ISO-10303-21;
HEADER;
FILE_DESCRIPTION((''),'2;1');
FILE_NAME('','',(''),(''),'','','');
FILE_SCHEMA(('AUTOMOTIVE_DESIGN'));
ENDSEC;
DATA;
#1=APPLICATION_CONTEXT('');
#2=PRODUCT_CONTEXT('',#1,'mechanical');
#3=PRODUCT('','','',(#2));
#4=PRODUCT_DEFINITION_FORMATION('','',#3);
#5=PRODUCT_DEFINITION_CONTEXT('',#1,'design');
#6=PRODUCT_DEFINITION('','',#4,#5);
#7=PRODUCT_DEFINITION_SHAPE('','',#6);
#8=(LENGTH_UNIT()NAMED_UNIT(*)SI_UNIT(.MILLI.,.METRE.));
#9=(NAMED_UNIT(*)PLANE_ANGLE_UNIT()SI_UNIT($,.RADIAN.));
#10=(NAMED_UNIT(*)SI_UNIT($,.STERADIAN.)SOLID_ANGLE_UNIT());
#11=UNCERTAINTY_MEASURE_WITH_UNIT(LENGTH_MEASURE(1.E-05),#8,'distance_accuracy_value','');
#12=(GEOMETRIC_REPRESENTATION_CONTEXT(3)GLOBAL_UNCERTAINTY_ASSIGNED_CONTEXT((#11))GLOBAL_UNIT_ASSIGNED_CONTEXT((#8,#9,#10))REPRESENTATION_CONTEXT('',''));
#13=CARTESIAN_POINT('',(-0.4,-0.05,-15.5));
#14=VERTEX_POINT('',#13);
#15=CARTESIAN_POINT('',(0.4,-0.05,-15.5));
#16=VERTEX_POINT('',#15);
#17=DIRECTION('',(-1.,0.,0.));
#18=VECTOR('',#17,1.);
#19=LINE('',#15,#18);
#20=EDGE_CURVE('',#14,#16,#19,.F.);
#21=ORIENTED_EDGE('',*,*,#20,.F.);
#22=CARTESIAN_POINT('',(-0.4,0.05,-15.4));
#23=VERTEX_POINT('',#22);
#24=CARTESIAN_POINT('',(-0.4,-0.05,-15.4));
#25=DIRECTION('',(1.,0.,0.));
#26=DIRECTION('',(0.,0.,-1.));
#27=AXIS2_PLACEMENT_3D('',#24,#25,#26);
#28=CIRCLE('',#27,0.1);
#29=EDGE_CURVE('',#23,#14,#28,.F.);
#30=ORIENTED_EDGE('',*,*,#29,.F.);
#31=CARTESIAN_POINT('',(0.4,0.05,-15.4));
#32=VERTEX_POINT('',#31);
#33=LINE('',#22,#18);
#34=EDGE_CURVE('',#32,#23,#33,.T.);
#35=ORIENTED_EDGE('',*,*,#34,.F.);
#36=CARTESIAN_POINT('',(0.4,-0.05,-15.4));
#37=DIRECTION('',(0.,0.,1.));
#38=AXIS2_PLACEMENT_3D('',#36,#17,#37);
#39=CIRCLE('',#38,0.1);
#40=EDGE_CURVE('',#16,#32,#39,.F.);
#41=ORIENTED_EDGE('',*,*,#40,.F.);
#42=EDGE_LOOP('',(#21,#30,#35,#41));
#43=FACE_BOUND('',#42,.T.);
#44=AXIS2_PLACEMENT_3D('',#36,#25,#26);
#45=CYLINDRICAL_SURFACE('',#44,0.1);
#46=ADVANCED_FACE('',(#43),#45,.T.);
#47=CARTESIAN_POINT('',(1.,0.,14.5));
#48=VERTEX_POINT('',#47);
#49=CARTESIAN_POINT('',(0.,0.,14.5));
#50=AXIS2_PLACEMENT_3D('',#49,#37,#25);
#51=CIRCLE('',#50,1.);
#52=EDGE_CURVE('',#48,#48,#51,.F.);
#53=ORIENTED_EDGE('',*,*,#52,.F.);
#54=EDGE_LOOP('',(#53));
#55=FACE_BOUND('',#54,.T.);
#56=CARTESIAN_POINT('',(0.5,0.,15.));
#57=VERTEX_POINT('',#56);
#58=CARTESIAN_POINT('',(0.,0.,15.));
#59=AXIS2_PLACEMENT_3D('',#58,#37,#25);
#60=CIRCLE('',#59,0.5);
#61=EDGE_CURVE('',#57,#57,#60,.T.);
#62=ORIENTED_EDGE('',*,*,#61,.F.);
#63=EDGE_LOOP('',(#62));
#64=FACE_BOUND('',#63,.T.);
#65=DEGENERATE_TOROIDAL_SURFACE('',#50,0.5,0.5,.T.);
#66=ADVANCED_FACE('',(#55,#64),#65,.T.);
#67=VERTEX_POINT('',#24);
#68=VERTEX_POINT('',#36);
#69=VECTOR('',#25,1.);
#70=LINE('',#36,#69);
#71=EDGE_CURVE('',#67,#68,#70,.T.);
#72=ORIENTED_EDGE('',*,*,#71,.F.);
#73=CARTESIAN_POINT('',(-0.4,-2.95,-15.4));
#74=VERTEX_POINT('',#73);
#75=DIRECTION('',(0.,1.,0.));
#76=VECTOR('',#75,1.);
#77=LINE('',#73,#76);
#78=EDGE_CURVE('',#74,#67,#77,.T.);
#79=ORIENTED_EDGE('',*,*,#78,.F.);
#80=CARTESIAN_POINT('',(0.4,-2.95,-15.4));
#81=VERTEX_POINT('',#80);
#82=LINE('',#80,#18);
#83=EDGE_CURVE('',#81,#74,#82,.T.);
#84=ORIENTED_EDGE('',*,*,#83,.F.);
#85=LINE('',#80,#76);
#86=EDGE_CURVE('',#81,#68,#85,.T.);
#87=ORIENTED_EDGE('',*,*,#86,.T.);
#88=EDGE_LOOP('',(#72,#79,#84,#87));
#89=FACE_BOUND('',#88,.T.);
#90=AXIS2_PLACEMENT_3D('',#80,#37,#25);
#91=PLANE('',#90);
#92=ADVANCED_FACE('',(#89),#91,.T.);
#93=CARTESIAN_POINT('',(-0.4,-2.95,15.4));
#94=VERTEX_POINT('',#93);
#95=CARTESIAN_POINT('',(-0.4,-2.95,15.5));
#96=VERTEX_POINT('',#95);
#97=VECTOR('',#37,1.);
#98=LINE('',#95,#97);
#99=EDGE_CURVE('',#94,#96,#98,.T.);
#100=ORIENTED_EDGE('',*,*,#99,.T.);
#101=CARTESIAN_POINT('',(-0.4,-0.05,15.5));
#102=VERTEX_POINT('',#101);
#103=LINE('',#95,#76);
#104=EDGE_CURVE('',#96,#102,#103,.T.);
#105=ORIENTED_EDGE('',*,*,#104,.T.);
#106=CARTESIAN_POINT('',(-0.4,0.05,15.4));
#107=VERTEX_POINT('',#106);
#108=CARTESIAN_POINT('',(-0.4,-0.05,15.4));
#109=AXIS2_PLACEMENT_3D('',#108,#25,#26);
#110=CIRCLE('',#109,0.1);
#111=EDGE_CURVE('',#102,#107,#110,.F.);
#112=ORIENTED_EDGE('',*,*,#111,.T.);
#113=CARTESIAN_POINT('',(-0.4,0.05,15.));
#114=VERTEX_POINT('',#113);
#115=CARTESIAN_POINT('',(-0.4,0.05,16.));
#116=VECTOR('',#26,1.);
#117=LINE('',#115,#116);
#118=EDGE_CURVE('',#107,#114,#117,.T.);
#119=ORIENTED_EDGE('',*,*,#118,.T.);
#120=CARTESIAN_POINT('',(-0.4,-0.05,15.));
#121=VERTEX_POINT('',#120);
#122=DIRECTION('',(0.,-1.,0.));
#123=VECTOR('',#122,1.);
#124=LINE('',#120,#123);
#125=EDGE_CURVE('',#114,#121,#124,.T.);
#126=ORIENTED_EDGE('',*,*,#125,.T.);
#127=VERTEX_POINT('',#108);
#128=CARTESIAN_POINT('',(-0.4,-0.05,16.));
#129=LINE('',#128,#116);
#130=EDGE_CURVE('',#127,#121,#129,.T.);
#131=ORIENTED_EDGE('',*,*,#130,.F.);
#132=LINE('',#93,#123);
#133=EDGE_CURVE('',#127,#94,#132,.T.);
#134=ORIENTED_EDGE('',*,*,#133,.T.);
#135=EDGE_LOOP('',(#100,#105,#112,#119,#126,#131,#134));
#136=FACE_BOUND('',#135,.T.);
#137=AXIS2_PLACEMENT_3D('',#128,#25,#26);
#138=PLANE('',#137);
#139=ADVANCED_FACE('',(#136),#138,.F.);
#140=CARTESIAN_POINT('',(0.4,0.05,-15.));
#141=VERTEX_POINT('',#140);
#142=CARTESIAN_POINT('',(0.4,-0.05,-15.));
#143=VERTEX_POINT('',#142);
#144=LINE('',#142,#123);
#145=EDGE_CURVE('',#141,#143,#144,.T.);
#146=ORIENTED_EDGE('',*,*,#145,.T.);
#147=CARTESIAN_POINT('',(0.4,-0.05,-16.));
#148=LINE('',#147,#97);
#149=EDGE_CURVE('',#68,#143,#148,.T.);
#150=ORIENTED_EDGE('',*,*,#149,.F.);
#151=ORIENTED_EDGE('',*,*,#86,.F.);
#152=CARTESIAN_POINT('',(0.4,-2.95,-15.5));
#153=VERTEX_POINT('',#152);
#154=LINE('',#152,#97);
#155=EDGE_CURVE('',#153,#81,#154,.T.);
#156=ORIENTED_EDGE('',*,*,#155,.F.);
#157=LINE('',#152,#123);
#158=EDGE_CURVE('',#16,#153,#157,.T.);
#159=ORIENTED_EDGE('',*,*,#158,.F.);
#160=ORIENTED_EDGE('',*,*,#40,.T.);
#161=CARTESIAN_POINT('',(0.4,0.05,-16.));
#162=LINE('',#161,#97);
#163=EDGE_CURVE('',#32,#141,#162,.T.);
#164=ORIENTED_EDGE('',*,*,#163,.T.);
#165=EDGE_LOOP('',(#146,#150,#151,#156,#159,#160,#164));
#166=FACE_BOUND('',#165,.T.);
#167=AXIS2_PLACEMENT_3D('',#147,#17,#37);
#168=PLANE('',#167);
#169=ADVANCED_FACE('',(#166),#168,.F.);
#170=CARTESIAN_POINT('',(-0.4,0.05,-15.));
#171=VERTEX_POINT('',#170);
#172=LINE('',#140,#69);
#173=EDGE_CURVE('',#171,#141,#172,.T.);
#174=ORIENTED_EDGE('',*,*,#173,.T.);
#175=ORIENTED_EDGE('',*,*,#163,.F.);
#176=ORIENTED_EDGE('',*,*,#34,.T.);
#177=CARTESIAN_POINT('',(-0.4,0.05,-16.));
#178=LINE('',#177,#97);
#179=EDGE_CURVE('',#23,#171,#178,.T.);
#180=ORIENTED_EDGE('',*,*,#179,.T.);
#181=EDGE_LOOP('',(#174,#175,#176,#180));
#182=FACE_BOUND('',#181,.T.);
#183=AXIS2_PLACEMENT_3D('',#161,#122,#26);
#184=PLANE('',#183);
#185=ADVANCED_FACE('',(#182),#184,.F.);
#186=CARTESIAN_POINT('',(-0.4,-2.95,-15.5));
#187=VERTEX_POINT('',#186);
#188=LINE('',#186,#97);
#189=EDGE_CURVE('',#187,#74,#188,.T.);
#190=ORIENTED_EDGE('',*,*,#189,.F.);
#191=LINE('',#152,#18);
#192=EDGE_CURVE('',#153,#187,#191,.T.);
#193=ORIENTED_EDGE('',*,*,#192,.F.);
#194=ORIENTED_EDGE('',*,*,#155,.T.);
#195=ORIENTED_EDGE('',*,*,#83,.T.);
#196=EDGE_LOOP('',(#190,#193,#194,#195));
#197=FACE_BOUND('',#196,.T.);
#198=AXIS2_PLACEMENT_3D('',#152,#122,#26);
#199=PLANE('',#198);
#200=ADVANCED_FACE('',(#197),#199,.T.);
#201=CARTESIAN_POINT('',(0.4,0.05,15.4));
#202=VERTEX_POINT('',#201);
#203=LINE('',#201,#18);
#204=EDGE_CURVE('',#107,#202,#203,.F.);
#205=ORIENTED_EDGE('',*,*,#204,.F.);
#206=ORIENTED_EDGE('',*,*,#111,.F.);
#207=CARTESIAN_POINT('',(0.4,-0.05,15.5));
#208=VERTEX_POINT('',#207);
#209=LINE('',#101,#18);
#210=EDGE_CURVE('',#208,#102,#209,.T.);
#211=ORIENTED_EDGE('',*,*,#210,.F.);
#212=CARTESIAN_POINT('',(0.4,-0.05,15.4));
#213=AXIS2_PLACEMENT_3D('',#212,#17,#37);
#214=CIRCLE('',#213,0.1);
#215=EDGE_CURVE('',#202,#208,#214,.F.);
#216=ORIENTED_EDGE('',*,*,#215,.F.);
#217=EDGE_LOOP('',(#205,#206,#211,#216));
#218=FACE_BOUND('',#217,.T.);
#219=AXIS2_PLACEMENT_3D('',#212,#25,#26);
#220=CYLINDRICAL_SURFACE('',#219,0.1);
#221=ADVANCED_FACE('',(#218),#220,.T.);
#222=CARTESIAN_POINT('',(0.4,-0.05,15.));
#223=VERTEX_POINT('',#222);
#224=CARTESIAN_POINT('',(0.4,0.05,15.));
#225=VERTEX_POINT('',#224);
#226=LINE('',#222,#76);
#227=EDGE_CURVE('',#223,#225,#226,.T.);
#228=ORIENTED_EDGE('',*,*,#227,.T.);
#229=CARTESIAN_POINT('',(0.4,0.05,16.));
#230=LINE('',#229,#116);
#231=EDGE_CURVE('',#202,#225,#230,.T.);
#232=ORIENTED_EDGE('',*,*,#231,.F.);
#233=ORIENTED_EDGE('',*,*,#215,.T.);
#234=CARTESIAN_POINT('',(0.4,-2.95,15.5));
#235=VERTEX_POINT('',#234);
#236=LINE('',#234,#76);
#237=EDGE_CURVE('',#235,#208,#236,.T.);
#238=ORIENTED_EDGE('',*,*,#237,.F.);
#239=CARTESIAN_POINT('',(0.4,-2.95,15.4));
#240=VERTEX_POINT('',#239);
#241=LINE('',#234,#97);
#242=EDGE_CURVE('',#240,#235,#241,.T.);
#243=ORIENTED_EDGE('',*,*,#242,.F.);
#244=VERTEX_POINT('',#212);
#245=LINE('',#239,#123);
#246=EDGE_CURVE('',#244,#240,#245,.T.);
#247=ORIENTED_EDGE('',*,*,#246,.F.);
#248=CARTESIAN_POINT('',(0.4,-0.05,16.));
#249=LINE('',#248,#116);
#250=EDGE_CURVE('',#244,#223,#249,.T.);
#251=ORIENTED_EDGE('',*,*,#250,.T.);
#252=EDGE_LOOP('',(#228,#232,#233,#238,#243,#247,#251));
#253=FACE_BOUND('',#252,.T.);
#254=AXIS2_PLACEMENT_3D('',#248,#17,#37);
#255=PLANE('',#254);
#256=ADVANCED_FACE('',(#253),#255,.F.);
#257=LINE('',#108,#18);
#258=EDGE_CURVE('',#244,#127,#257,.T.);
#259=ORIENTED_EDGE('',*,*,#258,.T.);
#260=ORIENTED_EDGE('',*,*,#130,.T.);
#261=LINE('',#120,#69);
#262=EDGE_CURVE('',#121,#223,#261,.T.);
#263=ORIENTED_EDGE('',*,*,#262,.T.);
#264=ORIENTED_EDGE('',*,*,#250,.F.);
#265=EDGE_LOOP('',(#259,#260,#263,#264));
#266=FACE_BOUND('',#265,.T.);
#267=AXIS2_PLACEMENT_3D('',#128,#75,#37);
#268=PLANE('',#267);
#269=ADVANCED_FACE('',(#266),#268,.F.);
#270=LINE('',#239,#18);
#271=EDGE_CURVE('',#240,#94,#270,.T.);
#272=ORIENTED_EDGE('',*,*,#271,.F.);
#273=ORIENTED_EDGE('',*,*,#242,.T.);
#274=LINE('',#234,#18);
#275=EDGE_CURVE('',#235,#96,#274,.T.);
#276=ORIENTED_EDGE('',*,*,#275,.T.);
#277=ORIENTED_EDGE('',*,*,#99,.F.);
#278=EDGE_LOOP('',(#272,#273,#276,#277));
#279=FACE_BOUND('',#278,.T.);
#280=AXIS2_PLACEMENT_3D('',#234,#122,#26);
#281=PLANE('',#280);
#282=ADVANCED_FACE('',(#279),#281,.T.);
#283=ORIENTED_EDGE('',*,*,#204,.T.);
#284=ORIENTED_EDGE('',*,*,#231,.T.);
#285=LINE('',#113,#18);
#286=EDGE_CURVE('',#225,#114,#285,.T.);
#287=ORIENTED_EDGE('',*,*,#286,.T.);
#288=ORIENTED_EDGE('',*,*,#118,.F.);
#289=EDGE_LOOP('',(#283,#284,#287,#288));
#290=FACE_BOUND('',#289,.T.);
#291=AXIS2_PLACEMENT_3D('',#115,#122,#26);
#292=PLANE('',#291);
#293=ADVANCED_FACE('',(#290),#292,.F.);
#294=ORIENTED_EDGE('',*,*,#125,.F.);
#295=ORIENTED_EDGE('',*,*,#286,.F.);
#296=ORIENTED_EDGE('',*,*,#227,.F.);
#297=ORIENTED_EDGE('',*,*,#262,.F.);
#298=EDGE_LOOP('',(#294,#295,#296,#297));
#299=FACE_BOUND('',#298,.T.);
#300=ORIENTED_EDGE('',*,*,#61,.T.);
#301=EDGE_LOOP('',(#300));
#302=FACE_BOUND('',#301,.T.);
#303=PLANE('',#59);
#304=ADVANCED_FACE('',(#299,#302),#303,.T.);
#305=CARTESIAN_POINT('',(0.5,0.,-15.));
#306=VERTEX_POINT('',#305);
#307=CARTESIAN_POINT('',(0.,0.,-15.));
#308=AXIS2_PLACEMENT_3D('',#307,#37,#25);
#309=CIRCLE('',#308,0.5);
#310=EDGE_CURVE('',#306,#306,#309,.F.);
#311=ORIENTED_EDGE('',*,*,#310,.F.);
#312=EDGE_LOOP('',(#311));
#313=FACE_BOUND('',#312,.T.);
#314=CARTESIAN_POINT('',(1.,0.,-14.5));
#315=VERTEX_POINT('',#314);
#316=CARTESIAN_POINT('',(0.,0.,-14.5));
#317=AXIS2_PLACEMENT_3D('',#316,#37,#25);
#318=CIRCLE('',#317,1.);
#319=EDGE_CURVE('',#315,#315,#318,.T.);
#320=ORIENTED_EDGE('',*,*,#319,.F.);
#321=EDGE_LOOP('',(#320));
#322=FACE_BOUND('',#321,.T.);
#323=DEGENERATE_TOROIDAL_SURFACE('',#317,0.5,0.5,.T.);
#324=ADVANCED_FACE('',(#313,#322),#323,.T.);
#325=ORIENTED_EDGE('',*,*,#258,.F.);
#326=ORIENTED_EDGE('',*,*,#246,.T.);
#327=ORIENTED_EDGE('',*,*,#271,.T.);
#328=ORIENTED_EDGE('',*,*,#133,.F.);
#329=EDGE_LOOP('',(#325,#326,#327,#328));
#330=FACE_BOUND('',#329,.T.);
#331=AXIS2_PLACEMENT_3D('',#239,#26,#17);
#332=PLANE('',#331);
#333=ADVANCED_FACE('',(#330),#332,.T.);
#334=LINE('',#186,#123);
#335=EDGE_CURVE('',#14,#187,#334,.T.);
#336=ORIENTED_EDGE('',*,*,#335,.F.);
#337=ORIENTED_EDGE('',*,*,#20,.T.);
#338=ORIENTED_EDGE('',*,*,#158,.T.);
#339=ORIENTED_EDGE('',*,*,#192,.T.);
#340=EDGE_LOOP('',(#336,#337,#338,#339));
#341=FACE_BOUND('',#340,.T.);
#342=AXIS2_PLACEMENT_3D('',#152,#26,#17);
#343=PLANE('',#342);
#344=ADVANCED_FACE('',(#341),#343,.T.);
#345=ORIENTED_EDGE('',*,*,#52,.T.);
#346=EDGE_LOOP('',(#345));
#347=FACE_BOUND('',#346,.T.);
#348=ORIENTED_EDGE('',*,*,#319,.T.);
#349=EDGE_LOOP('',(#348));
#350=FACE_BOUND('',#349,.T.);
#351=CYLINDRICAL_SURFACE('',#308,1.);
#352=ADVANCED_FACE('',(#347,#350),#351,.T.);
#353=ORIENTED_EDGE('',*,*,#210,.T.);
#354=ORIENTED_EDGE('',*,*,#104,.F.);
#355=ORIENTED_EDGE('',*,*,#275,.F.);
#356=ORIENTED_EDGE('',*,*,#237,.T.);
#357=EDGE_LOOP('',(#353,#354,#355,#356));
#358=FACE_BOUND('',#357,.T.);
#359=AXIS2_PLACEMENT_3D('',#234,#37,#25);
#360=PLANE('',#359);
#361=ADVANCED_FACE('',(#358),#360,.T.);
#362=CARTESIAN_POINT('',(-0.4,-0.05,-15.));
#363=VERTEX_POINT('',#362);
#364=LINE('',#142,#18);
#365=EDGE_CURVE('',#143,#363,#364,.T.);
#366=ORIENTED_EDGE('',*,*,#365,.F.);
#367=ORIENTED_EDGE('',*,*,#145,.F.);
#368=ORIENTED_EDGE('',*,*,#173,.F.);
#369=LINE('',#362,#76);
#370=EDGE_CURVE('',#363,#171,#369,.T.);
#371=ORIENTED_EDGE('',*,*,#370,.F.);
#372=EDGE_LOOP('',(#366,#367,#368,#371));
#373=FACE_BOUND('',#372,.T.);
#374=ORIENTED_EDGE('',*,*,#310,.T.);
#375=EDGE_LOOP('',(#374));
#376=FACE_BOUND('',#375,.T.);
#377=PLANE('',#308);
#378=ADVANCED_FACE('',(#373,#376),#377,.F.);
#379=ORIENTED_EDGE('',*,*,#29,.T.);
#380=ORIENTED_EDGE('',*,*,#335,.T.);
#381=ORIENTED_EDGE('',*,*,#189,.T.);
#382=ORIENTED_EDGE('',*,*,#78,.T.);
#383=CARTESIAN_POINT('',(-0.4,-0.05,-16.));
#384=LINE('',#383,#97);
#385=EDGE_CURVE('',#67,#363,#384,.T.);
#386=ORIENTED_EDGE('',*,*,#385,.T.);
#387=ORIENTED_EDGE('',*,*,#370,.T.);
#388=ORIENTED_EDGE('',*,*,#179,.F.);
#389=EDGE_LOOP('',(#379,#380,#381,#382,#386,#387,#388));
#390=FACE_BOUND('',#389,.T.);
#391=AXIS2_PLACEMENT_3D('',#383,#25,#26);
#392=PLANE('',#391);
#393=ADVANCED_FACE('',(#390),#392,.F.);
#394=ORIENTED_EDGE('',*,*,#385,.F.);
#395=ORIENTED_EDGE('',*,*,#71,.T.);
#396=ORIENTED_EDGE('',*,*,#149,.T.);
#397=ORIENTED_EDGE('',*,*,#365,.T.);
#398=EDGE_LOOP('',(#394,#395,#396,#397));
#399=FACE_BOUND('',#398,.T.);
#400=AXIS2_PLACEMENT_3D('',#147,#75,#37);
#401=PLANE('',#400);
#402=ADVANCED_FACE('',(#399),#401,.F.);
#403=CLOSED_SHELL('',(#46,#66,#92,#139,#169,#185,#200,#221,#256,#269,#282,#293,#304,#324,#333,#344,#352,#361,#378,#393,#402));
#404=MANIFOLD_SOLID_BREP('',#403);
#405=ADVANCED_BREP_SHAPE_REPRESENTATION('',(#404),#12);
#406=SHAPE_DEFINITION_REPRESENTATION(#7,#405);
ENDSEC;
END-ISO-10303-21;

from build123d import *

# Parameters (mm, degrees)
BOSS_EXTRU_1_DEPTH      = 15
BOSS_EXTRU_1_DEPTH_BACK = 15
ESQUISSE1_R             = 1
ESQUISSE2_W             = 0.8
ESQUISSE2_H             = 0.1
BOSS_EXTRU_2_DEPTH      = 1
ESQUISSE3_W             = 0.8
ESQUISSE3_H             = 0.1
BOSS_EXTRU_3_DEPTH      = 1
CONG_1_R                = 0.5
ESQUISSE4_W             = 0.1
ESQUISSE4_H             = 3
BOSS_EXTRU_4_DEPTH      = 0.8
ESQUISSE5_W             = 0.5
ESQUISSE5_H             = 0.1
ENL_V_MAT_EXTRU_1_DEPTH = 0.8
CONG_2_R                = 0.1
ESQUISSE6_W             = 0.1
ESQUISSE6_H             = 3
BOSS_EXTRU_5_DEPTH      = 0.8
ESQUISSE7_W             = 0.5
ESQUISSE7_H             = 0.1
ENL_V_MAT_EXTRU_2_DEPTH = 0.8
CONG_3_R                = 0.1


with BuildPart() as part:
    # Esquisse1 → Boss.-Extru.1 (new, two sides: drawn at the far end of the back side and taken through both)
    with BuildSketch(Plane.XY.offset(-BOSS_EXTRU_1_DEPTH_BACK)):
        Circle(ESQUISSE1_R)
    extrude(amount=BOSS_EXTRU_1_DEPTH + BOSS_EXTRU_1_DEPTH_BACK)

    # Esquisse2 → Boss.-Extru.2 (add)
    with BuildSketch(Plane.XY.offset(15)):
        Rectangle(ESQUISSE2_W, ESQUISSE2_H)
    extrude(amount=BOSS_EXTRU_2_DEPTH)

    # Esquisse3 → Boss.-Extru.3 (add)
    with BuildSketch(Plane(origin=(0, 0, -15), x_dir=(-1, 0, 0), z_dir=(0, 0, -1))):
        Rectangle(ESQUISSE3_W, ESQUISSE3_H)
    extrude(amount=BOSS_EXTRU_3_DEPTH)

    # Congé1
    cong_1_edges = [part.edges().sort_by_distance(p)[0] for p in [
        (-1, 0, 15),
        (-1, 0, -15),
    ]]
    fillet(cong_1_edges, radius=CONG_1_R)

    # Esquisse4 → Boss.-Extru.4 (add)
    with BuildSketch(Plane.ZY.offset(0.4)):
        with Locations((-15.45, -1.45)):
            Rectangle(ESQUISSE4_W, ESQUISSE4_H)
    extrude(amount=-BOSS_EXTRU_4_DEPTH)

    # Esquisse5 → Enlèv. mat.-Extru.1 (cut)
    with BuildSketch(Plane.ZY.offset(0.4)):
        with Locations((-15.75, 0)):
            Rectangle(ESQUISSE5_W, ESQUISSE5_H)
    extrude(amount=-ENL_V_MAT_EXTRU_1_DEPTH, mode=Mode.SUBTRACT)

    # Congé2
    cong_2_edges = [part.edges().sort_by_distance(p)[0] for p in [
        (0, 0.05, -15.5),
    ]]
    fillet(cong_2_edges, radius=CONG_2_R - 0.0001)  # a hair under: the kernel refuses the full size

    # Esquisse6 → Boss.-Extru.5 (add)
    with BuildSketch(Plane.ZY.offset(0.4)):
        with Locations((15.45, -1.45)):
            Rectangle(ESQUISSE6_W, ESQUISSE6_H)
    extrude(amount=-BOSS_EXTRU_5_DEPTH)

    # Esquisse7 → Enlèv. mat.-Extru.2 (cut)
    with BuildSketch(Plane.ZY.offset(0.4)):
        with Locations((15.75, 0)):
            Rectangle(ESQUISSE7_W, ESQUISSE7_H)
    extrude(amount=-ENL_V_MAT_EXTRU_2_DEPTH, mode=Mode.SUBTRACT)

    # Congé3
    cong_3_edges = [part.edges().sort_by_distance(p)[0] for p in [
        (0, 0.05, 15.5),
    ]]
    fillet(cong_3_edges, radius=CONG_3_R)


solid = part.part
